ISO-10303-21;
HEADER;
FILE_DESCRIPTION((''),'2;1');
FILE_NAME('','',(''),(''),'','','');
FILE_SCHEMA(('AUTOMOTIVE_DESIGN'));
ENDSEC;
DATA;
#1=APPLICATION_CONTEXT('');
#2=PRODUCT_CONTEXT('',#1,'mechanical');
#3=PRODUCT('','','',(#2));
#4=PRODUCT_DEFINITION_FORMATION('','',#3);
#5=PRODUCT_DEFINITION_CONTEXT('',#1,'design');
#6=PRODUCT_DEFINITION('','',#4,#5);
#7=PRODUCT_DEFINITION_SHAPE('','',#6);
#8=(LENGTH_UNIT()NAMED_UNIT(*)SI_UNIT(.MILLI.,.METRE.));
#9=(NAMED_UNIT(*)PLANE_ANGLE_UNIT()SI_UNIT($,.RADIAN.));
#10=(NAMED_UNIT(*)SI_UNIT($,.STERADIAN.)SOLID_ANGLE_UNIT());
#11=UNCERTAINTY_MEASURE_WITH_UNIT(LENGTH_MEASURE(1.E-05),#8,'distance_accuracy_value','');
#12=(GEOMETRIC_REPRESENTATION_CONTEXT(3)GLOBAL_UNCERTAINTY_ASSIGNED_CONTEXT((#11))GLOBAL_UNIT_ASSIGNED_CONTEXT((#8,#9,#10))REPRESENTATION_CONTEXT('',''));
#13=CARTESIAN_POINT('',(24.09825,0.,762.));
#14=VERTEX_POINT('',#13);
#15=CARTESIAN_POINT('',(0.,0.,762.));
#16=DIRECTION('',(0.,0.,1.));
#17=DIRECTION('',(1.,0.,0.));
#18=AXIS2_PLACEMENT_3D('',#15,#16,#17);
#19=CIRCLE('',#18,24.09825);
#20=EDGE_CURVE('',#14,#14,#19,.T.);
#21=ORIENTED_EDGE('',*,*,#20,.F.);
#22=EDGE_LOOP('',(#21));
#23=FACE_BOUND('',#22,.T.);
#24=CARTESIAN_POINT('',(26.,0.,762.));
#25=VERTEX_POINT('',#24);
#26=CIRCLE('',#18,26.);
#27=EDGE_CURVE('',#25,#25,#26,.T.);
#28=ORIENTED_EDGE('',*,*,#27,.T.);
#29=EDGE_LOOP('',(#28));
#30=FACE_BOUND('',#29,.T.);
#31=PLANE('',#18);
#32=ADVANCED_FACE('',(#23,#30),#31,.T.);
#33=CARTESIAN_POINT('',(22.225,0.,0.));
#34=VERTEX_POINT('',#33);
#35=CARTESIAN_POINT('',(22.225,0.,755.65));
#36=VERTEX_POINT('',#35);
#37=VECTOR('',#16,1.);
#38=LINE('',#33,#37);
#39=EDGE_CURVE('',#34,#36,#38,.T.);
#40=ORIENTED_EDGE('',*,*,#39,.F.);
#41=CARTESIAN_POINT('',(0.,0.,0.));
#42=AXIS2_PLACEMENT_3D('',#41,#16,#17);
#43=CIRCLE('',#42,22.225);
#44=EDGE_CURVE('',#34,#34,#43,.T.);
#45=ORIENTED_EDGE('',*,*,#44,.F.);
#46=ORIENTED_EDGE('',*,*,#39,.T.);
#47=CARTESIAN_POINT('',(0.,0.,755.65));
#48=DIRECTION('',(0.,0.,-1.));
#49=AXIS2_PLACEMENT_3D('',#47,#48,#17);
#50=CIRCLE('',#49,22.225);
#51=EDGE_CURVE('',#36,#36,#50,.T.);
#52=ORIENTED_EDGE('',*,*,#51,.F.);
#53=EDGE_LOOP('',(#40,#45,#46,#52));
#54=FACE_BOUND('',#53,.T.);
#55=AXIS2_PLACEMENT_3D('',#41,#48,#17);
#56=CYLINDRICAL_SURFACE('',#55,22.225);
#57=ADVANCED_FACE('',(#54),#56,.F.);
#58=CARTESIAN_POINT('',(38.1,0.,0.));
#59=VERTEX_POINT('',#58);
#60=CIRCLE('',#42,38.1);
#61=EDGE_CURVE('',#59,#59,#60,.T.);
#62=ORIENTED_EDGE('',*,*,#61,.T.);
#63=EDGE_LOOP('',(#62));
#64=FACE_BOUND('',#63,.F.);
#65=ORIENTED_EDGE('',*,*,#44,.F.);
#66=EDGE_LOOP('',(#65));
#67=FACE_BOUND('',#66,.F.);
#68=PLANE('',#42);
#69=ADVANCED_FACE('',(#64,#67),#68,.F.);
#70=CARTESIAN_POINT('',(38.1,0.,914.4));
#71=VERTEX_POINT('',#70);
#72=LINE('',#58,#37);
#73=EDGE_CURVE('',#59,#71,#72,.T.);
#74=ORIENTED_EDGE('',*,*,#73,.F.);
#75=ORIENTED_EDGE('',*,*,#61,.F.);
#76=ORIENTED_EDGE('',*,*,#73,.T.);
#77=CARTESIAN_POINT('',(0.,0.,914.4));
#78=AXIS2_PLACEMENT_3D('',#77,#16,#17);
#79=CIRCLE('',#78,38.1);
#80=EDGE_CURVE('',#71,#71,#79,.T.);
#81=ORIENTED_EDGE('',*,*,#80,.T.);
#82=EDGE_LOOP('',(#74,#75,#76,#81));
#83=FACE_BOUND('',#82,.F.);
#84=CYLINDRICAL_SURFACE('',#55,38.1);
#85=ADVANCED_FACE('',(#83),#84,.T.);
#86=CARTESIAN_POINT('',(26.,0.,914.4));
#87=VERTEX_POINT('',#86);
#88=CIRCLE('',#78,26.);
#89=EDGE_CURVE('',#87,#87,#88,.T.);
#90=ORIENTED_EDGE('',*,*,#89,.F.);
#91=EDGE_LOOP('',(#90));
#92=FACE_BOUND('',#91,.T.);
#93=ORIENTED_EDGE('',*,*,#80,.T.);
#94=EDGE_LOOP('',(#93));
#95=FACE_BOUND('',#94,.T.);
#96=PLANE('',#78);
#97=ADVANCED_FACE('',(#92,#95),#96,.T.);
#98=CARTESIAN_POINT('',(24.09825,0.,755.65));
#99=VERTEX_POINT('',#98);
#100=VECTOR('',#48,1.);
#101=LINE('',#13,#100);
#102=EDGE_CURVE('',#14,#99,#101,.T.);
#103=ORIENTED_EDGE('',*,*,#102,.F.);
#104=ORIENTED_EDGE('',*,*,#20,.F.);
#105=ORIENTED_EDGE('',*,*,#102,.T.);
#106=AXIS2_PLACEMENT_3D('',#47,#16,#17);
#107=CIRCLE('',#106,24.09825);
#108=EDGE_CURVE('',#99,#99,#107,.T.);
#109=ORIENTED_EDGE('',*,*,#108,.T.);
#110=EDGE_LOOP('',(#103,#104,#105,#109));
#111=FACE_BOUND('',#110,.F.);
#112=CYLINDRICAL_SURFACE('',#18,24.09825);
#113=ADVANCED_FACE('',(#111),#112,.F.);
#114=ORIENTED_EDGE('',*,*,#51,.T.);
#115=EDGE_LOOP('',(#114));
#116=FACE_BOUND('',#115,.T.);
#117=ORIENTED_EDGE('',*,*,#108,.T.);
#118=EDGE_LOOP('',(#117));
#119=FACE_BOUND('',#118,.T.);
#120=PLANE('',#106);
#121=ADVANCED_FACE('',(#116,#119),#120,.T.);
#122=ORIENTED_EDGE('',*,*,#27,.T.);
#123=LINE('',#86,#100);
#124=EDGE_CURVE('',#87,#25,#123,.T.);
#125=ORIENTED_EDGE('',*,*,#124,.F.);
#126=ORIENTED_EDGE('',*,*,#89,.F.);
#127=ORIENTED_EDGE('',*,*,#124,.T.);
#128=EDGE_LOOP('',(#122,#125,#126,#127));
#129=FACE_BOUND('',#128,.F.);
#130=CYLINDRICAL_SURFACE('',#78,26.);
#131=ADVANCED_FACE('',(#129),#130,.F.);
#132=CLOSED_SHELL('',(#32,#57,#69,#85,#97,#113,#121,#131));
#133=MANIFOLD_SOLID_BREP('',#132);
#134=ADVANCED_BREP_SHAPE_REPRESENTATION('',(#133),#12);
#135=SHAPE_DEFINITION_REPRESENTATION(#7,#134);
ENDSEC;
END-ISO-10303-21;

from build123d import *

# Parameters (mm, degrees)
F0_R     = 38.1
F0_R_2   = 22.225
F1_DEPTH = 914.4
F3_R     = 26
F3_R_2   = 22.225
F4_DEPTH = 152.4
F5_R     = 24.09825
F6_DEPTH = 6.35


# Not quite as in the source:
# - a feature names something its author has since deleted; it is built from what else it names


with BuildPart() as f1:
    # F0 (on Top) → F1 (new body)
    with BuildSketch(Plane.XY):
        Circle(F0_R)
        Circle(F0_R_2, mode=Mode.SUBTRACT)
    extrude(amount=F1_DEPTH)

    # F3 (on face) → F4 (cut)
    with BuildSketch(Plane.XY.offset(914.4)):
        Circle(F3_R)
        Circle(F3_R_2, mode=Mode.SUBTRACT)
    extrude(amount=-F4_DEPTH, mode=Mode.SUBTRACT)

    # F5 (on face) → F6 (cut)
    with BuildSketch(Plane.XY.offset(762)):
        Circle(F5_R)
    extrude(amount=-F6_DEPTH, mode=Mode.SUBTRACT)


solid = f1.part
